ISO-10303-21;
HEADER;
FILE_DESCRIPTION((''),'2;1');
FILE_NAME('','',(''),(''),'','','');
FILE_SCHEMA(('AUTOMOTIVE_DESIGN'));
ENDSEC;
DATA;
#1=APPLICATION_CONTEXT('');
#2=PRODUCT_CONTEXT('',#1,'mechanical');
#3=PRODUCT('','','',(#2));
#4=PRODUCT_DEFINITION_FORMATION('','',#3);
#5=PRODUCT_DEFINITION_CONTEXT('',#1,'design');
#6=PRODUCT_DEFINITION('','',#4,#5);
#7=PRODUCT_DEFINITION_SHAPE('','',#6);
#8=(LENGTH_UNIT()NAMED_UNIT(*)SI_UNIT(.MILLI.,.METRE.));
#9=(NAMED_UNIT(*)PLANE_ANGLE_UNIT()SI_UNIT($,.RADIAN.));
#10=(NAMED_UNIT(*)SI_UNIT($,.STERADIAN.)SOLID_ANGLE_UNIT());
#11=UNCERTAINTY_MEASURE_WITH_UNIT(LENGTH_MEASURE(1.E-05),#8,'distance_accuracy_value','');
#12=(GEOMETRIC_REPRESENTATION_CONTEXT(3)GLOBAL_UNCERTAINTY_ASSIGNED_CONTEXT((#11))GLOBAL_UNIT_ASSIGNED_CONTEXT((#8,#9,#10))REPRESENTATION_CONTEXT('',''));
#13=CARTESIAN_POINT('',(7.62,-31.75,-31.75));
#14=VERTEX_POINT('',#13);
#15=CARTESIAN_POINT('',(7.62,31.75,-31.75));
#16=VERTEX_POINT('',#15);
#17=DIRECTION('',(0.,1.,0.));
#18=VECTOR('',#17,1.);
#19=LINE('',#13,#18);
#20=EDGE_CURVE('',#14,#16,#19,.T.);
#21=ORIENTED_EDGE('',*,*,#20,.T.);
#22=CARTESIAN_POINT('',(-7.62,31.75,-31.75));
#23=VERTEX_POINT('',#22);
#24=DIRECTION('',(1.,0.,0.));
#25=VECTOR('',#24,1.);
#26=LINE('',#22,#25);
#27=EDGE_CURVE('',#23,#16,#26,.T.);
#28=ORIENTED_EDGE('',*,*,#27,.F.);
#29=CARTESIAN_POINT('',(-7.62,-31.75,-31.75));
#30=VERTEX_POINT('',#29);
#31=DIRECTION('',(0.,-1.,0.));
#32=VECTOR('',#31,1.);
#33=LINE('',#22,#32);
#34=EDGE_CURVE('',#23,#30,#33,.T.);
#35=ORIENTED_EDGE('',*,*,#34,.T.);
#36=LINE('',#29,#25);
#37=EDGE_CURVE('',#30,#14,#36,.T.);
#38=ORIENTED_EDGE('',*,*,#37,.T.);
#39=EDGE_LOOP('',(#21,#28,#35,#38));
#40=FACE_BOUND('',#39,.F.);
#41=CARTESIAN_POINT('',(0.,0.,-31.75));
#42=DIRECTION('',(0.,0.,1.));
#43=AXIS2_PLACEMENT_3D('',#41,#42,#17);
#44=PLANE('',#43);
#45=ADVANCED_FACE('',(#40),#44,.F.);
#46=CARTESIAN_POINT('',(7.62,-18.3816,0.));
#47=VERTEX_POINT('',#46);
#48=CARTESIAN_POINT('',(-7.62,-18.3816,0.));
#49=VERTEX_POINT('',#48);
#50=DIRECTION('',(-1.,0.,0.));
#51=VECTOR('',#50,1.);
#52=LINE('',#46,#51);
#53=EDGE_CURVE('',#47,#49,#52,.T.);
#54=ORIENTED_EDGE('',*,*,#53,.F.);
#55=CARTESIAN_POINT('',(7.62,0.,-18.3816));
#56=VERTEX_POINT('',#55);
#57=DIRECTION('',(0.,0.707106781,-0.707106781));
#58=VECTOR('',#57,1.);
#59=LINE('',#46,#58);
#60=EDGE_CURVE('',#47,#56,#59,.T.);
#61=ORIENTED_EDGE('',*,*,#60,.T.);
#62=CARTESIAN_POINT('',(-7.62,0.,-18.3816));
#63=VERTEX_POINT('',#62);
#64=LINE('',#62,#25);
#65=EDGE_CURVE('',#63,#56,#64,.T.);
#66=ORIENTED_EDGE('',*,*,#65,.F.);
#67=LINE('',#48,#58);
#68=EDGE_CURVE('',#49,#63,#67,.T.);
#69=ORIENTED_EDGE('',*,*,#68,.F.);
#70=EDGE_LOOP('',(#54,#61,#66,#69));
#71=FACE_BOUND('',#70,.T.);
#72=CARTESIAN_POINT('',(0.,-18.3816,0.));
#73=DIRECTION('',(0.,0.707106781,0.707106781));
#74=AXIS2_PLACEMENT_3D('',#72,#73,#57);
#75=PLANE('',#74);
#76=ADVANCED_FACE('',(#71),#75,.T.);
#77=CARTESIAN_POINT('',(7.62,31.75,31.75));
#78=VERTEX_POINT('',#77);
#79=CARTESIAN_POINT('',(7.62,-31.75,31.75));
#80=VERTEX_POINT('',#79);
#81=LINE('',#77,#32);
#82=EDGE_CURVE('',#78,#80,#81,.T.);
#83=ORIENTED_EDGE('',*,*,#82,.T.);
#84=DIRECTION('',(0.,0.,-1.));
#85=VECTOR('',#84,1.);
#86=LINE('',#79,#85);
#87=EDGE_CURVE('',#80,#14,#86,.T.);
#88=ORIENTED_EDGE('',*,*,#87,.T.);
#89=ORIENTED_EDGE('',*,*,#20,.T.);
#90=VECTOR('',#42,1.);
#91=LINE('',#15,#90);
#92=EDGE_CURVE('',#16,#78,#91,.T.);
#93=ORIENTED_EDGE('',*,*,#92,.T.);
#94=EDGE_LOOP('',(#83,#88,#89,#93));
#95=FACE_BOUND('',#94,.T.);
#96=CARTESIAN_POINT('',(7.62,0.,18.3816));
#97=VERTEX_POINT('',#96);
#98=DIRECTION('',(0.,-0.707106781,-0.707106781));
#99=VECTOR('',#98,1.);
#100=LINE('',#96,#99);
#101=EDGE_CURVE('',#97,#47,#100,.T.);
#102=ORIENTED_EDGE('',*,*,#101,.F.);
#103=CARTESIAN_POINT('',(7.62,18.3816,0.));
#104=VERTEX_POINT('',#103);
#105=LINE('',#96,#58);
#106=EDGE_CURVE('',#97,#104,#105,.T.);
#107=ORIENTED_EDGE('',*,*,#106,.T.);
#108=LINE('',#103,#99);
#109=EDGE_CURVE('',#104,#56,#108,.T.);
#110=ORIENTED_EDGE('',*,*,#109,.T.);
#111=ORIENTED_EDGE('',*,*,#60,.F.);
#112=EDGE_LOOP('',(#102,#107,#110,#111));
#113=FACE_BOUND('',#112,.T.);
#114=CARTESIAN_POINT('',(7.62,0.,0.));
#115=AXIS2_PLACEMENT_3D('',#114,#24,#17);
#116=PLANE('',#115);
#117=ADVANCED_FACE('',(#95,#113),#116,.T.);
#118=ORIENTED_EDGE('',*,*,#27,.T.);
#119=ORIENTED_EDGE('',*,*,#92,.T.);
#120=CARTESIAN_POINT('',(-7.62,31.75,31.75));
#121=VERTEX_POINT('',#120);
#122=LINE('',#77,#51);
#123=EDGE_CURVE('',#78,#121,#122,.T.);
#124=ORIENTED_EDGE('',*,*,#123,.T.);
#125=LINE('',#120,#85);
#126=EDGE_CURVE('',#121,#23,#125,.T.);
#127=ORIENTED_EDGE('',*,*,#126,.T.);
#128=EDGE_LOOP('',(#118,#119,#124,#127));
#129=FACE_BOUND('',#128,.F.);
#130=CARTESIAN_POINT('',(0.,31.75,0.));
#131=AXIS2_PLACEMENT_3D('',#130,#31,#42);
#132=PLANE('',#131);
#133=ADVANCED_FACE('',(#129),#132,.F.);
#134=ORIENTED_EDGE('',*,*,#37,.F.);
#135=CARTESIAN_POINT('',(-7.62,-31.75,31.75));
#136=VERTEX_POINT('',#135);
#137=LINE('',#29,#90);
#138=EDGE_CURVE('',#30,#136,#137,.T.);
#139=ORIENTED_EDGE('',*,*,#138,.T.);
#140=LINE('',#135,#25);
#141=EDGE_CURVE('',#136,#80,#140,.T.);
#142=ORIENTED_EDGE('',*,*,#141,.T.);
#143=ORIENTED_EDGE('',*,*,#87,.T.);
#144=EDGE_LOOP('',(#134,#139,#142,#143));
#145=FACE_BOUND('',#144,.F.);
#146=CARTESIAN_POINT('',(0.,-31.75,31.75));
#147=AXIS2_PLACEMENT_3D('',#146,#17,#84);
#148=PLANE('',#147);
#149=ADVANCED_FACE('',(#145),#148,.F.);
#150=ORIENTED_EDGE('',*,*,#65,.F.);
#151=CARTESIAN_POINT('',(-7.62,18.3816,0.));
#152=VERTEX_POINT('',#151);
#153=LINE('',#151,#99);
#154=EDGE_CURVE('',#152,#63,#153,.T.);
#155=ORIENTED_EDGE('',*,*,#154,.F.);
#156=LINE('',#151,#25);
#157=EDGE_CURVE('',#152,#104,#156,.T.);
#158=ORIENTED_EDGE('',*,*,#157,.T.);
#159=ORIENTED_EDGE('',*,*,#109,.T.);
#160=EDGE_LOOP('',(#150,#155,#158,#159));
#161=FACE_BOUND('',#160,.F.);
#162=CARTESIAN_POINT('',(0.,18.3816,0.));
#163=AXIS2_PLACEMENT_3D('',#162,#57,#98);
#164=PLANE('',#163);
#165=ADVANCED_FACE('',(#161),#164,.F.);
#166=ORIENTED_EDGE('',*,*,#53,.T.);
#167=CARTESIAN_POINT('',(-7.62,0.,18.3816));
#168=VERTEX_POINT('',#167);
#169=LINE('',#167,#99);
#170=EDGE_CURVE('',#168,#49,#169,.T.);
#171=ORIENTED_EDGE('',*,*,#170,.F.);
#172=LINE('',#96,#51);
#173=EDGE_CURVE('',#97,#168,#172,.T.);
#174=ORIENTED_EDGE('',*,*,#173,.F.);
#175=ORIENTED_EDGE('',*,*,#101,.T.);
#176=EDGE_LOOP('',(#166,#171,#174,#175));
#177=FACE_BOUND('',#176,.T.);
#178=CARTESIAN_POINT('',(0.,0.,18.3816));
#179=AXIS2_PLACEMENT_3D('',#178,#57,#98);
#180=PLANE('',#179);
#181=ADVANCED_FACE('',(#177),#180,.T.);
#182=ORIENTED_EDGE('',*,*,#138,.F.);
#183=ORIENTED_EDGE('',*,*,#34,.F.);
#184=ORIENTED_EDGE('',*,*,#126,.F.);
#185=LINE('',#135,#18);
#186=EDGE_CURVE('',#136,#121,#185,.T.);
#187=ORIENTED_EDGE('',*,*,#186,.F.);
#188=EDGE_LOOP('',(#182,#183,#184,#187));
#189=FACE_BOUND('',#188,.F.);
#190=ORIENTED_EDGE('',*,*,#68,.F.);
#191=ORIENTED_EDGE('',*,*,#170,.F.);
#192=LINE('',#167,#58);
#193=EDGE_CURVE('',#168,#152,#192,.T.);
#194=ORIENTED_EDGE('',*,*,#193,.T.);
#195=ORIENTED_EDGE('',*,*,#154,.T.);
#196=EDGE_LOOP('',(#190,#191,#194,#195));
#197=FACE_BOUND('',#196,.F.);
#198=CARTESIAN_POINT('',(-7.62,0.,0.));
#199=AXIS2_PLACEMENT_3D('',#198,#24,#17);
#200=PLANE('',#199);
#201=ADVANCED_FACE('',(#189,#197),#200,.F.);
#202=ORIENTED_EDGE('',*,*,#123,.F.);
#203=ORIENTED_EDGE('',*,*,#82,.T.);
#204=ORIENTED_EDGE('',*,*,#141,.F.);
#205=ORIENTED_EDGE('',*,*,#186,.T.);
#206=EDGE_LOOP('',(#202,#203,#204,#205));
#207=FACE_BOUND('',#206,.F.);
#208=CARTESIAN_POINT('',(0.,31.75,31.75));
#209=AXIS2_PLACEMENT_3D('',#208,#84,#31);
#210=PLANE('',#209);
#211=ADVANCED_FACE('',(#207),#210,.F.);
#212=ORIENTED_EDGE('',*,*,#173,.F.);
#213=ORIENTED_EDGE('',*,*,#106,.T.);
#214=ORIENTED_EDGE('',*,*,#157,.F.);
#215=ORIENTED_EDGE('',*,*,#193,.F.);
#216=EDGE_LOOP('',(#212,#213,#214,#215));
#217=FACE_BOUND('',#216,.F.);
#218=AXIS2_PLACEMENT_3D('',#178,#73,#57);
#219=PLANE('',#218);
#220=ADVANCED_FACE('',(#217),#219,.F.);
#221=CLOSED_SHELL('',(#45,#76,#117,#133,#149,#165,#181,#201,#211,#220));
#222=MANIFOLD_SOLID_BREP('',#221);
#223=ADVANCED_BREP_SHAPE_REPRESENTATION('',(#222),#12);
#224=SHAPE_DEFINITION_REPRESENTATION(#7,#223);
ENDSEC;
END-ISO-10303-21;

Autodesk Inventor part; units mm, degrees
ref_plane "YZ Plane" through (0, 0, 0) normal (1, 0, 0) x (0, 1, 0)
ref_plane "XZ Plane" through (0, 0, 0) normal (0, 1, 0) x (-1, 0, 0)
ref_plane "XY Plane" through (0, 0, 0) normal (0, 0, 1) x (1, 0, 0)
sketch "Sketch1" plane through (0, 0, 0) normal (1, 0, 0) x (0, 1, 0)
  line L0 (0, 17.9605) -> (17.9605, 0) construction
  line L1 (17.9605, 0) -> (0, -17.9605) construction
  line L2 (0, -17.9605) -> (-17.9605, 0) construction
  line L3 (-17.9605, 0) -> (0, 17.9605) construction
  line L4 (0, 17.9605) -> (0, -17.9605) construction
  line L5 (17.9605, 0) -> (-17.9605, 0) construction
  line L6 (0, 18.3816) -> (-18.3816, 0)
  line L7 (0, 18.3816) -> (18.3816, 0)
  line L8 (18.3816, 0) -> (0, -18.3816)
  line L9 (-18.3816, 0) -> (0, -18.3816)
  line L10 (0, 25.5658) -> (-25.5658, 0)
  line L11 (-25.5658, 0) -> (0, -25.5658)
  line L12 (0, -25.5658) -> (25.5658, 0)
  line L13 (25.5658, 0) -> (0, 25.5658)
  line L14 (-44.45, 0) -> (44.45, 0) projected
  line L15 (0, -44.45) -> (0, 44.45) projected
  line L16 (31.75, 31.75) -> (-31.75, 31.75)
  line L17 (-31.75, 31.75) -> (-31.75, -31.75)
  line L18 (-31.75, -31.75) -> (31.75, -31.75)
  line L19 (31.75, -31.75) -> (31.75, 31.75)
  line L20 (31.75, 31.75) -> (-31.75, -31.75) construction
  line L21 (-31.75, 31.75) -> (31.75, -31.75) construction
  point P0 (0, 0)
  point P1 (0, 0)
  point P2 (0, 0)
  point P3 (0, 0)
  point P4 (29.7157, 21.8287)
  point P5 (0, 0)
  dimension "d0" = 25.4
  dimension "d1" = 25.4
  dimension "d3" = 5.08
  dimension "d4" = 5.08
  dimension "d7" = 63.5
  dimension "d8" = 63.5
extrude "Extrusion1" add sketch "Sketch1" along normal mid plane 15.24 contours L15 L13 L14 L7 | L6 L14 L10 L15 | L9 L15 L11 L14 | L14 L12 L15 L8 | L15 L16 L19 L14 L13 | L10 L14 L17 L16 L15 | L11 L15 L18 L17 L14 | L14 L19 L18 L15 L12
equation "\"d4\" = d3"
equation "\"d8\" = d7"
properties part number "y_axis_mount" material "ABS Plastic"
